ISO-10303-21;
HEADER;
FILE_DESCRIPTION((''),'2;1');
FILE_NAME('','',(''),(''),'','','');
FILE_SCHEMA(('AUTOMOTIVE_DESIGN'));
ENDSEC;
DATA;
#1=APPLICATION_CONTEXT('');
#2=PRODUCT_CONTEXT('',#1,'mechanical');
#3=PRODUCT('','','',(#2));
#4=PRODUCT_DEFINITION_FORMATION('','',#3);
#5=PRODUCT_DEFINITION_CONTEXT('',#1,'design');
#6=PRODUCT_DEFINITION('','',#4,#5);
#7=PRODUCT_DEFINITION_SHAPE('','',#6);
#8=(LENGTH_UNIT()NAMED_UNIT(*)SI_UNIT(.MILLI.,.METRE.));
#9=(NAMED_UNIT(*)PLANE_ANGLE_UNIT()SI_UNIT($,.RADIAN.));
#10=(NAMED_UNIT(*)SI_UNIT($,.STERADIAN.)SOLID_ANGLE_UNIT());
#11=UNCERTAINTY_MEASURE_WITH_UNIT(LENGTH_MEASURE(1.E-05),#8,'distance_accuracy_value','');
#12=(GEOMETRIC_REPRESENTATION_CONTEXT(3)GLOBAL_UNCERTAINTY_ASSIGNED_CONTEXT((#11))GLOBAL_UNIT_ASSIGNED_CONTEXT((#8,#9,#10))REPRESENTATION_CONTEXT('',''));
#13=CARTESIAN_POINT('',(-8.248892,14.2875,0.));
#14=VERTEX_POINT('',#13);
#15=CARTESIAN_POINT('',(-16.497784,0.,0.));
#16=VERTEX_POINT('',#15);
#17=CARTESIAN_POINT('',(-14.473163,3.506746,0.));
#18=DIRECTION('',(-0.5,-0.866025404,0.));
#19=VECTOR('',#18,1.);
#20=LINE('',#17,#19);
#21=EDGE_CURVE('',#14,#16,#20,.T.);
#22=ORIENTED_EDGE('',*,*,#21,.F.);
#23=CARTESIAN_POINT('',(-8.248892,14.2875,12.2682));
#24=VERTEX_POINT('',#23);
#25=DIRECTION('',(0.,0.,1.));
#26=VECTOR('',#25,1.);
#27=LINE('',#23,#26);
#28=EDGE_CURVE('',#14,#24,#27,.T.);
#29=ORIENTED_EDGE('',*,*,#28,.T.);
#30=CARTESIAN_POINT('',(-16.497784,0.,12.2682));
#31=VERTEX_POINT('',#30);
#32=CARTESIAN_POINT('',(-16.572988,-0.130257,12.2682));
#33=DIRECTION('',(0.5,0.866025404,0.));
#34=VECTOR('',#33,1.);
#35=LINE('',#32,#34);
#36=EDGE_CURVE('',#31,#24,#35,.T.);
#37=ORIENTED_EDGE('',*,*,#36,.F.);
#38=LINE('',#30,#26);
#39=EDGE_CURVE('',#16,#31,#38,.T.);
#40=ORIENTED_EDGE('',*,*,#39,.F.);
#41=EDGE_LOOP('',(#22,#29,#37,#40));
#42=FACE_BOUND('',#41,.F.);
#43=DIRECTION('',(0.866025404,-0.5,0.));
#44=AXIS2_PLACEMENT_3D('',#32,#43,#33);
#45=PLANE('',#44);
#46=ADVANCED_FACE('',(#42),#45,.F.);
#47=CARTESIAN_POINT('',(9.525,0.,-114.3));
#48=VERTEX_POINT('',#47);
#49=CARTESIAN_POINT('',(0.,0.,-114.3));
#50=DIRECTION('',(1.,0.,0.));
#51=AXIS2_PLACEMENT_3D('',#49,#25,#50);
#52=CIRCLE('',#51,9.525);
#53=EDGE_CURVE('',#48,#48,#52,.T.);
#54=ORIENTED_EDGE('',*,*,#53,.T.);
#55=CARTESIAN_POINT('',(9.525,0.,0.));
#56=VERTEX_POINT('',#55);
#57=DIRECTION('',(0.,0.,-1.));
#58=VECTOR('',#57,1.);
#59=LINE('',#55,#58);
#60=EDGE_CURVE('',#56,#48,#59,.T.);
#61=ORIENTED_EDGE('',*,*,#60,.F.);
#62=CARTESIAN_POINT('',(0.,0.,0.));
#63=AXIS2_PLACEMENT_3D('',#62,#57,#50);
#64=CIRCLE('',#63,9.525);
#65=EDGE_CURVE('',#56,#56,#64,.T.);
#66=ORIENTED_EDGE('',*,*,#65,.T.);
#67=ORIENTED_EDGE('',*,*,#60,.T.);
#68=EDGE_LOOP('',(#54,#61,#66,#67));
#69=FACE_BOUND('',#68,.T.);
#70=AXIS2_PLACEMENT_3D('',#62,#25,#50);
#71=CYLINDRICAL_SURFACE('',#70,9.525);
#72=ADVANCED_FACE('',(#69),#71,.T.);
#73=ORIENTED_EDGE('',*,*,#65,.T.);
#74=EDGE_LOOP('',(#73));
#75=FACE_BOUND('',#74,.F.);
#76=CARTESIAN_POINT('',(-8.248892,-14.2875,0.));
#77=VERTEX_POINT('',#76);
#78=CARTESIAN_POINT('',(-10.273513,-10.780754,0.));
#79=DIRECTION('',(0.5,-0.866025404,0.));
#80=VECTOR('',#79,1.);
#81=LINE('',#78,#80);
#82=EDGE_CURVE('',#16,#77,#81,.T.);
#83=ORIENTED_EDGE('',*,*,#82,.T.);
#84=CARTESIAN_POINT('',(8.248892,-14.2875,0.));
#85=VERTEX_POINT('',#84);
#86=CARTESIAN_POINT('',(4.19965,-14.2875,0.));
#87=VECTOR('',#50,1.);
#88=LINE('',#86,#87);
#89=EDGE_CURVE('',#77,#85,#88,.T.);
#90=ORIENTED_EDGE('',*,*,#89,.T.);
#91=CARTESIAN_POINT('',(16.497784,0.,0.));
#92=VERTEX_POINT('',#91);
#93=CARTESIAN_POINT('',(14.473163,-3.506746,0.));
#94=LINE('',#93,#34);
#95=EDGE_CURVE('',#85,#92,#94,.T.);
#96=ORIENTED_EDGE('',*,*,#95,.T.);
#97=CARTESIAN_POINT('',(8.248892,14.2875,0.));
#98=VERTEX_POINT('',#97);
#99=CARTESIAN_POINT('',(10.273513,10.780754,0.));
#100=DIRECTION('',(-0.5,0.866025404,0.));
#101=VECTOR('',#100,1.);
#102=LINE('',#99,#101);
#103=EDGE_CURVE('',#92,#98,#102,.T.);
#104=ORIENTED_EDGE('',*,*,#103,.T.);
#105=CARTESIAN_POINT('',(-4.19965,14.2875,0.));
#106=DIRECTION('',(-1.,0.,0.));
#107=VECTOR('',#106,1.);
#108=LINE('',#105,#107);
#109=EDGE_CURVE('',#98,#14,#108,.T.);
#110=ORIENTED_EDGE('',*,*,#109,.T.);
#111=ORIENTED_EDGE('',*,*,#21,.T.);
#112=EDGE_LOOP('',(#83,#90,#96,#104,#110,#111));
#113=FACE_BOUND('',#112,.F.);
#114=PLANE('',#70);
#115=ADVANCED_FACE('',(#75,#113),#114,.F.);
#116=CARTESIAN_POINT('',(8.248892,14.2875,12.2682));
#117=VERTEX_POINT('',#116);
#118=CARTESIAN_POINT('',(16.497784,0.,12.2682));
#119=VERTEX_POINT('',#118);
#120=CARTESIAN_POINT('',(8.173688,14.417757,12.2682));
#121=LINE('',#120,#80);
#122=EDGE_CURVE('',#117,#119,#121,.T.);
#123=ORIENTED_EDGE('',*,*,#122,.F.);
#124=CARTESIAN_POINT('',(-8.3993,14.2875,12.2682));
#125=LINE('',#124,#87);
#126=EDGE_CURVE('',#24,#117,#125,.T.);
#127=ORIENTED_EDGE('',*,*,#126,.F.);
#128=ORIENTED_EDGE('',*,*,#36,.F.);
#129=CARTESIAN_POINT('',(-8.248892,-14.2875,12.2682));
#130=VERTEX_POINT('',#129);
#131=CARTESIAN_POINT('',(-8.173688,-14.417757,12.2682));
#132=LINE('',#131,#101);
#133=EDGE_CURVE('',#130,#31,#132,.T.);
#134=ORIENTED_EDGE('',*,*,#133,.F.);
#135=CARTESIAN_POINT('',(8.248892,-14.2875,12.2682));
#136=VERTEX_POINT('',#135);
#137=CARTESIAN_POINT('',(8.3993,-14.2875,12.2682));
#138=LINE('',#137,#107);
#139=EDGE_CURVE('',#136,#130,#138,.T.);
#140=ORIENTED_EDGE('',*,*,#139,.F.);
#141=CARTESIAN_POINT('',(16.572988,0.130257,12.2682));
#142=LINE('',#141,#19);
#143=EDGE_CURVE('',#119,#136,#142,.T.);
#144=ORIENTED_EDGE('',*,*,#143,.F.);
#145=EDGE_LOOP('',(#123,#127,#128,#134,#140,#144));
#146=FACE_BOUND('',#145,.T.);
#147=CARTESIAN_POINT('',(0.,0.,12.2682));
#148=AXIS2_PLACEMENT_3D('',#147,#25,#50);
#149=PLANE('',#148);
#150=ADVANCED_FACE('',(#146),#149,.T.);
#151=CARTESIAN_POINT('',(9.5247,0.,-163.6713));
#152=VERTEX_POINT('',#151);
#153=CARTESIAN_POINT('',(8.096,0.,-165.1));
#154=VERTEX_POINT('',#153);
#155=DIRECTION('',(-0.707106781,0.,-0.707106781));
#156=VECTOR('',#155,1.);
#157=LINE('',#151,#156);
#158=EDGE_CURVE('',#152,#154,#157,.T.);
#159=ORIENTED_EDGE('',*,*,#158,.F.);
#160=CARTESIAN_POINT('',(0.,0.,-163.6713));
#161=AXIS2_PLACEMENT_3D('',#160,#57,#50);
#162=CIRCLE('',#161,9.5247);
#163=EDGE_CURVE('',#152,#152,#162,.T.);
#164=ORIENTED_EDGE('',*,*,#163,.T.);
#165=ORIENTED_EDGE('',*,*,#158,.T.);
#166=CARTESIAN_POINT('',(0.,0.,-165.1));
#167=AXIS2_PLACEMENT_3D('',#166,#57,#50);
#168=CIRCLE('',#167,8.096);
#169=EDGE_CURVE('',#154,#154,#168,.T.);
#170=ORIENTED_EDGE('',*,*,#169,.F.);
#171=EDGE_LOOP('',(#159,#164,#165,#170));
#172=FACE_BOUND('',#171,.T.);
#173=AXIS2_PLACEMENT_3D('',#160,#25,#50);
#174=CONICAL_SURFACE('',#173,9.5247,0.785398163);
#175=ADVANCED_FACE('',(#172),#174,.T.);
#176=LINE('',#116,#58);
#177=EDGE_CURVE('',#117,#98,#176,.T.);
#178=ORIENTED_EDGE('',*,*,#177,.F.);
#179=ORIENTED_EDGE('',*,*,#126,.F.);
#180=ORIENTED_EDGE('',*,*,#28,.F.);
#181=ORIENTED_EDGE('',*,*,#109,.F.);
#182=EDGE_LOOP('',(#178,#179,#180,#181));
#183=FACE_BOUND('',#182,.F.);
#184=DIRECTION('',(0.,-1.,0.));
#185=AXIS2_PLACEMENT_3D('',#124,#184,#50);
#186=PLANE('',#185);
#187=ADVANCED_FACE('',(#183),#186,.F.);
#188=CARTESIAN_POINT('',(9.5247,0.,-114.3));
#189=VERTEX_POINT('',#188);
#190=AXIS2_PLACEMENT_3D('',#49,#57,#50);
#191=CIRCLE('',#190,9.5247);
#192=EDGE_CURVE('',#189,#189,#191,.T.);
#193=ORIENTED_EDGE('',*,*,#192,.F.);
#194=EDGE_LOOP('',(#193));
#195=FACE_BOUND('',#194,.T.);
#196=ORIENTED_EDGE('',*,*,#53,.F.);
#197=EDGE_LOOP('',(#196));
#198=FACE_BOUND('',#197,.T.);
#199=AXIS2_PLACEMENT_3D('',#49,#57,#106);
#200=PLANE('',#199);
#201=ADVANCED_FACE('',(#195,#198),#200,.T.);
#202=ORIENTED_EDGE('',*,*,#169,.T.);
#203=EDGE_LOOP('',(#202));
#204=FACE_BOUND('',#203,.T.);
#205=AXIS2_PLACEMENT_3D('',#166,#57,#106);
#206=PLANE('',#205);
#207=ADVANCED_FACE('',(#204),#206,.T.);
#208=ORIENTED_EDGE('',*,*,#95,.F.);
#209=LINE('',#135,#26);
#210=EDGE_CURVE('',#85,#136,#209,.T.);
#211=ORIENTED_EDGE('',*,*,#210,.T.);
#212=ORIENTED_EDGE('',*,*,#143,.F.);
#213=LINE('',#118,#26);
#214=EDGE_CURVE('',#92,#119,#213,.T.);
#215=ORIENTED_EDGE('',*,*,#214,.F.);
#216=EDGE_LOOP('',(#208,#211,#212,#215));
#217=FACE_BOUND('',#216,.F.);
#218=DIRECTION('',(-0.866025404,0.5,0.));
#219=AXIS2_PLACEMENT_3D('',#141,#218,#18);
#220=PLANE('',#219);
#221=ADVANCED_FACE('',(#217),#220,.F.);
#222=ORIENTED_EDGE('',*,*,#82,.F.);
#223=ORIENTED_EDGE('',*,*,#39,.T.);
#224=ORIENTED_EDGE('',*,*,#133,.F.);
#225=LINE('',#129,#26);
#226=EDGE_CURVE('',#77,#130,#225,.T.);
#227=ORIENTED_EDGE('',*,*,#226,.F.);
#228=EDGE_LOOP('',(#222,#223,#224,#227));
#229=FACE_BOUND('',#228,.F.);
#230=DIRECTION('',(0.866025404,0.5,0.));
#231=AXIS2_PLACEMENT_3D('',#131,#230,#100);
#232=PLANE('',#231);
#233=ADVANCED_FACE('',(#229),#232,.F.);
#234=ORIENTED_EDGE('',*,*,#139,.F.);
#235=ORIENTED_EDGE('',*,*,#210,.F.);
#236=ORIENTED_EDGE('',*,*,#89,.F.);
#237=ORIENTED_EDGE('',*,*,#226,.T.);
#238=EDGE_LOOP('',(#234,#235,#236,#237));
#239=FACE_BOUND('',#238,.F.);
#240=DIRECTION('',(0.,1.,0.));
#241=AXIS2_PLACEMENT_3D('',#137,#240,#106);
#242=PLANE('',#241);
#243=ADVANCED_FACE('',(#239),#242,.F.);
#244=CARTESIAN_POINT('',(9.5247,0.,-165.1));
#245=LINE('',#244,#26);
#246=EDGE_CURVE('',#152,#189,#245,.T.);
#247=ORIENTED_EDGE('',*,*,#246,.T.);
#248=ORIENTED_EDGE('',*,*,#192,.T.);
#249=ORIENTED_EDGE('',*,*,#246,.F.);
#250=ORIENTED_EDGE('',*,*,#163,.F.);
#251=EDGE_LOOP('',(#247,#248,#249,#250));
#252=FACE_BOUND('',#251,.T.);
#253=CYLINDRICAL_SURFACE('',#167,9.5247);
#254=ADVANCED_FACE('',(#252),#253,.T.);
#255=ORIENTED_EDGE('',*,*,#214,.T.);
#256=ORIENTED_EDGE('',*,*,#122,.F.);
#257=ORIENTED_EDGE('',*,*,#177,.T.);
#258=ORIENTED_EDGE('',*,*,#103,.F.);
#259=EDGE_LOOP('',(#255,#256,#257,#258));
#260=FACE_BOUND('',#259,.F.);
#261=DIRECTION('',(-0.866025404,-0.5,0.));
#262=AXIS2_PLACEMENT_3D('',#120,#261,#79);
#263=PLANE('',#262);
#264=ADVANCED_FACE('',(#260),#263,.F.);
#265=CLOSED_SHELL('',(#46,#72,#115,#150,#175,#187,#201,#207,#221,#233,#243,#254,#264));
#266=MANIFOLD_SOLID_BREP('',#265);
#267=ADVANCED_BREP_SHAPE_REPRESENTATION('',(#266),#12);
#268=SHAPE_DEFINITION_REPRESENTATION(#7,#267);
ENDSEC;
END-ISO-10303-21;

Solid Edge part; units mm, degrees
sketch "Sketch1" plane through (0, 0, 0) normal (0, 0, 1) x (1, 0, 0)
  circle A0 centre (0, 0) radius 16.5735
  dimension "D1" = 33.147
extrude "Protrusion1" add sketch "Sketch1" along normal blind 12.2682
sketch "Sketch2" plane through (0, 0, 0) normal (0, 0, -1) x (1, 0, 0)
  circle A0 centre (0, 0) radius 9.525
extrude "Protrusion2" add sketch "Sketch2" along normal blind 165.1
sketch "Sketch3" plane through (0, 0, -165.1) normal (0, 0, -1) x (1, 0, 0)
  circle A0 centre (0, 0) radius 9.5247
extrude "Cutout1" cut sketch "Sketch3" against normal blind 50.8 flip side to cut
chamfer "Chamfer_1" distance 1.4287 angle 45 1 edges at (-9.5247, 0, -165.1)
sketch "Sketch4" plane through (0, 0, 12.2682) normal (0, 0, 1) x (1, 0, 0)
  line L0 (-8.3993, 14.2875) -> (8.3993, 14.2875)
  dimension "D1" = 28.575
extrude "Cutout2" cut sketch "Sketch4" against normal up to next material side at (0, 14.3375, 12.2682)
pattern_circular "Pattern1" count 6 over 360 about axis through (0, 0, 12.2682) along (0, 0, 1) of "Cutout2"
properties part number "24103775"
